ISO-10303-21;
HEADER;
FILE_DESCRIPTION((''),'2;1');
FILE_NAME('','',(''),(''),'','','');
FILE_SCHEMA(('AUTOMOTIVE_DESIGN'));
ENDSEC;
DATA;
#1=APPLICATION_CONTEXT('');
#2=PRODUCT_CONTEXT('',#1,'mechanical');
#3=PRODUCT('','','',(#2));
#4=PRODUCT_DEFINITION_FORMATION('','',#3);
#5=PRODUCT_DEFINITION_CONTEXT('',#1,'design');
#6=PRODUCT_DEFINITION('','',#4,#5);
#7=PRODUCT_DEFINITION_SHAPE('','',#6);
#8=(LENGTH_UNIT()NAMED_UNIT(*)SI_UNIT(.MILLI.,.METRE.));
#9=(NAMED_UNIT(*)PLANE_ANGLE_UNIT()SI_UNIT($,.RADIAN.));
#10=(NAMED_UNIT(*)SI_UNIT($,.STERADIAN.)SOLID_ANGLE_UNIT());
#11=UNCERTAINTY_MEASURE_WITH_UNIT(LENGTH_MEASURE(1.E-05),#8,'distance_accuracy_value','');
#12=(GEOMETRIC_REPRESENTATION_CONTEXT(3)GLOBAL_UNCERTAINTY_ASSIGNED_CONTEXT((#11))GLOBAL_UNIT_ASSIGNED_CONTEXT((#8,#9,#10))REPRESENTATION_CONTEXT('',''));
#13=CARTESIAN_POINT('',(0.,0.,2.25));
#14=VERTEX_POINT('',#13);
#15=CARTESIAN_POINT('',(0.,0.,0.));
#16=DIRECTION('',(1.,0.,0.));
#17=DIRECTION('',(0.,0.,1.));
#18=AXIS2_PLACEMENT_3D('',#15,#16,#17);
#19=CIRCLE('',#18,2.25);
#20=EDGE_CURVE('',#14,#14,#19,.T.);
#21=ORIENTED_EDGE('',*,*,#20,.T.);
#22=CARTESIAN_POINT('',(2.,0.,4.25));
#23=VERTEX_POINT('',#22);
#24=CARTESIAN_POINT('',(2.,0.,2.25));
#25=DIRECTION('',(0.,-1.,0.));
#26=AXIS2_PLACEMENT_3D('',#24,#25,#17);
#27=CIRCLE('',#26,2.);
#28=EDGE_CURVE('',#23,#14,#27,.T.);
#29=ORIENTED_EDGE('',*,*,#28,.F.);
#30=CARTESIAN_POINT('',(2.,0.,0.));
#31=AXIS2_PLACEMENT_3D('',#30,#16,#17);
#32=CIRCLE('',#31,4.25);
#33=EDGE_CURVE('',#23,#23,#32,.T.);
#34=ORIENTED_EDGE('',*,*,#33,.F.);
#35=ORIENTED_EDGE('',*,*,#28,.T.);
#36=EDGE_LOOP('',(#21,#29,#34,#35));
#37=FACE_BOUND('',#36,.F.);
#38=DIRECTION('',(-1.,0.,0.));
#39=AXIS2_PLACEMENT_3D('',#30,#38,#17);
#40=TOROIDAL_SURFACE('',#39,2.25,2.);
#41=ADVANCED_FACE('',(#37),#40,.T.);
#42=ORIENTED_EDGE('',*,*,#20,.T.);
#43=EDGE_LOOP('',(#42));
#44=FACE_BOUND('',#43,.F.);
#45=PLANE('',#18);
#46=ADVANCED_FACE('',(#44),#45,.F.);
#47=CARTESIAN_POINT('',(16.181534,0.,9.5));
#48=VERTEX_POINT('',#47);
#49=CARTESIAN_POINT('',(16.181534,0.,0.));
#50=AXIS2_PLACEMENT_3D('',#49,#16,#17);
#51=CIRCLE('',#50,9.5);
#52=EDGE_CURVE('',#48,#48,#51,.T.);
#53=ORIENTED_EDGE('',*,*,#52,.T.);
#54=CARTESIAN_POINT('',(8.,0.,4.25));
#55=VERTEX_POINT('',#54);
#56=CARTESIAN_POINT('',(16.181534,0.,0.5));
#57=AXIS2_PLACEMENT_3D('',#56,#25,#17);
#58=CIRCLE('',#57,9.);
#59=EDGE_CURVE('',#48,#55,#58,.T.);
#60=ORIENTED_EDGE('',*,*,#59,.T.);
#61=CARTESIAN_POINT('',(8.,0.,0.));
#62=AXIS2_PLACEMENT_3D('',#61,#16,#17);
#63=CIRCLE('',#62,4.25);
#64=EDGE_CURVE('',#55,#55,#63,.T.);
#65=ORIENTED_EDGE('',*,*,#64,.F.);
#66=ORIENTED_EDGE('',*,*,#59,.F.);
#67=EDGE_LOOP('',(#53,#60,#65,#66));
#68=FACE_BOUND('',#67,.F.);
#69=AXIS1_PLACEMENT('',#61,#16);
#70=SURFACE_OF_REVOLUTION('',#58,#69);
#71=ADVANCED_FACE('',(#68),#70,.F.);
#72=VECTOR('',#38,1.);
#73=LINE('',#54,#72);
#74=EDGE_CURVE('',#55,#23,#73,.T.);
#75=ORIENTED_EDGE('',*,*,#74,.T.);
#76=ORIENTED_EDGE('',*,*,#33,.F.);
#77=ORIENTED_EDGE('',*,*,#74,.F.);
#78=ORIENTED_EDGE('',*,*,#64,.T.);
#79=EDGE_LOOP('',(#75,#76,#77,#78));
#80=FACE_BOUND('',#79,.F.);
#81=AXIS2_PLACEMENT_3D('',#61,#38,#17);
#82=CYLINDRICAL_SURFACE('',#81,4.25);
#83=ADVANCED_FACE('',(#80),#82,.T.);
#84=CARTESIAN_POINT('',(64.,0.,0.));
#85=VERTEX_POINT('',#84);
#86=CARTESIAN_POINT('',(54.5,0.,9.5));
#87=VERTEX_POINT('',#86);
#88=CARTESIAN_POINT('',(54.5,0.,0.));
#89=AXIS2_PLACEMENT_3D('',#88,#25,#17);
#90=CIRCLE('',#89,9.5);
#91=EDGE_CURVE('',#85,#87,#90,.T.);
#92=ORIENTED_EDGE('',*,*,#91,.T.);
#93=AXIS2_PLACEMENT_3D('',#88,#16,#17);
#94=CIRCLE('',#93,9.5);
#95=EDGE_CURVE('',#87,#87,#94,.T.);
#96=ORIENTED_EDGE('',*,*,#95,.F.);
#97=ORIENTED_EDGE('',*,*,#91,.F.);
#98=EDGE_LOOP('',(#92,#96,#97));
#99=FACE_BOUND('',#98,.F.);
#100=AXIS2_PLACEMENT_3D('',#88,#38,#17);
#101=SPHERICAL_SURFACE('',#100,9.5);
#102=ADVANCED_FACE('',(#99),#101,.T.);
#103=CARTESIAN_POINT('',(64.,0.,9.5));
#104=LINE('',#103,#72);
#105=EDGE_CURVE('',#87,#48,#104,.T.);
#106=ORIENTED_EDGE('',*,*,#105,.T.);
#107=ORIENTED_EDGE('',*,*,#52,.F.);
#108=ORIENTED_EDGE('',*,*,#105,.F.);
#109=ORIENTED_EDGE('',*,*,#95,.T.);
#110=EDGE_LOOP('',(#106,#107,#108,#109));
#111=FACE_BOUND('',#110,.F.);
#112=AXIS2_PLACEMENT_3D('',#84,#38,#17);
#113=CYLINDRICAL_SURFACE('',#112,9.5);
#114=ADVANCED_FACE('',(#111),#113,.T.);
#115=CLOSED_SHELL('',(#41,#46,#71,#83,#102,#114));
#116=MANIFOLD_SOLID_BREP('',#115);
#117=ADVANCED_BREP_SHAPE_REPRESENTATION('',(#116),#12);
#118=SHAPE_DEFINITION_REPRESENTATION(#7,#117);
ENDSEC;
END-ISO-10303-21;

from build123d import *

# Parameters (mm, degrees)
F2_R = 9.5
F4_R = 2


# Not quite as in the source:
# - a fillet or chamfer that OpenCascade refuses, or shapes differently, is made with other operations: its cross-section is extruded or revolved along the edge and cut away or added


with BuildPart() as f1:
    # F0 (on Front) → F1 (revolve)
    with BuildSketch(Plane.XZ):
        Polygon((0, 4.25), (0, 0), (64, 0), (64, 9.5), (8, 9.5), (8, 4.25), align=None)
    revolve(axis=Axis((32, 0, 0), (1, 0, 0)))

    # F2
    f2_edges = [f1.edges().sort_by_distance(p)[0] for p in [
        (64, 0, -9.5),
    ]]
    fillet(f2_edges, radius=F2_R)

    # F3: fillet of radius 9 on 1 edges, made by hand

    # F3_s1 → F3_t2 (revolve, cut)
    with BuildSketch(Plane.XZ):
        with BuildLine():
            ThreePointArc((16.181534086, 9.5), (11.3209785622, 8.0746287038), (8, 4.25))
            Line((8, 4.25), (8, 9.5))
            Line((8, 9.5), (16.181534086, 9.5))
        make_face()
    revolve(axis=Axis((8, 0, 0), (1, 0, 0)), mode=Mode.SUBTRACT)

    # F4
    f4_edges = [f1.edges().sort_by_distance(p)[0] for p in [
        (0, 0, -4.25),
    ]]
    fillet(f4_edges, radius=F4_R)


solid = f1.part
